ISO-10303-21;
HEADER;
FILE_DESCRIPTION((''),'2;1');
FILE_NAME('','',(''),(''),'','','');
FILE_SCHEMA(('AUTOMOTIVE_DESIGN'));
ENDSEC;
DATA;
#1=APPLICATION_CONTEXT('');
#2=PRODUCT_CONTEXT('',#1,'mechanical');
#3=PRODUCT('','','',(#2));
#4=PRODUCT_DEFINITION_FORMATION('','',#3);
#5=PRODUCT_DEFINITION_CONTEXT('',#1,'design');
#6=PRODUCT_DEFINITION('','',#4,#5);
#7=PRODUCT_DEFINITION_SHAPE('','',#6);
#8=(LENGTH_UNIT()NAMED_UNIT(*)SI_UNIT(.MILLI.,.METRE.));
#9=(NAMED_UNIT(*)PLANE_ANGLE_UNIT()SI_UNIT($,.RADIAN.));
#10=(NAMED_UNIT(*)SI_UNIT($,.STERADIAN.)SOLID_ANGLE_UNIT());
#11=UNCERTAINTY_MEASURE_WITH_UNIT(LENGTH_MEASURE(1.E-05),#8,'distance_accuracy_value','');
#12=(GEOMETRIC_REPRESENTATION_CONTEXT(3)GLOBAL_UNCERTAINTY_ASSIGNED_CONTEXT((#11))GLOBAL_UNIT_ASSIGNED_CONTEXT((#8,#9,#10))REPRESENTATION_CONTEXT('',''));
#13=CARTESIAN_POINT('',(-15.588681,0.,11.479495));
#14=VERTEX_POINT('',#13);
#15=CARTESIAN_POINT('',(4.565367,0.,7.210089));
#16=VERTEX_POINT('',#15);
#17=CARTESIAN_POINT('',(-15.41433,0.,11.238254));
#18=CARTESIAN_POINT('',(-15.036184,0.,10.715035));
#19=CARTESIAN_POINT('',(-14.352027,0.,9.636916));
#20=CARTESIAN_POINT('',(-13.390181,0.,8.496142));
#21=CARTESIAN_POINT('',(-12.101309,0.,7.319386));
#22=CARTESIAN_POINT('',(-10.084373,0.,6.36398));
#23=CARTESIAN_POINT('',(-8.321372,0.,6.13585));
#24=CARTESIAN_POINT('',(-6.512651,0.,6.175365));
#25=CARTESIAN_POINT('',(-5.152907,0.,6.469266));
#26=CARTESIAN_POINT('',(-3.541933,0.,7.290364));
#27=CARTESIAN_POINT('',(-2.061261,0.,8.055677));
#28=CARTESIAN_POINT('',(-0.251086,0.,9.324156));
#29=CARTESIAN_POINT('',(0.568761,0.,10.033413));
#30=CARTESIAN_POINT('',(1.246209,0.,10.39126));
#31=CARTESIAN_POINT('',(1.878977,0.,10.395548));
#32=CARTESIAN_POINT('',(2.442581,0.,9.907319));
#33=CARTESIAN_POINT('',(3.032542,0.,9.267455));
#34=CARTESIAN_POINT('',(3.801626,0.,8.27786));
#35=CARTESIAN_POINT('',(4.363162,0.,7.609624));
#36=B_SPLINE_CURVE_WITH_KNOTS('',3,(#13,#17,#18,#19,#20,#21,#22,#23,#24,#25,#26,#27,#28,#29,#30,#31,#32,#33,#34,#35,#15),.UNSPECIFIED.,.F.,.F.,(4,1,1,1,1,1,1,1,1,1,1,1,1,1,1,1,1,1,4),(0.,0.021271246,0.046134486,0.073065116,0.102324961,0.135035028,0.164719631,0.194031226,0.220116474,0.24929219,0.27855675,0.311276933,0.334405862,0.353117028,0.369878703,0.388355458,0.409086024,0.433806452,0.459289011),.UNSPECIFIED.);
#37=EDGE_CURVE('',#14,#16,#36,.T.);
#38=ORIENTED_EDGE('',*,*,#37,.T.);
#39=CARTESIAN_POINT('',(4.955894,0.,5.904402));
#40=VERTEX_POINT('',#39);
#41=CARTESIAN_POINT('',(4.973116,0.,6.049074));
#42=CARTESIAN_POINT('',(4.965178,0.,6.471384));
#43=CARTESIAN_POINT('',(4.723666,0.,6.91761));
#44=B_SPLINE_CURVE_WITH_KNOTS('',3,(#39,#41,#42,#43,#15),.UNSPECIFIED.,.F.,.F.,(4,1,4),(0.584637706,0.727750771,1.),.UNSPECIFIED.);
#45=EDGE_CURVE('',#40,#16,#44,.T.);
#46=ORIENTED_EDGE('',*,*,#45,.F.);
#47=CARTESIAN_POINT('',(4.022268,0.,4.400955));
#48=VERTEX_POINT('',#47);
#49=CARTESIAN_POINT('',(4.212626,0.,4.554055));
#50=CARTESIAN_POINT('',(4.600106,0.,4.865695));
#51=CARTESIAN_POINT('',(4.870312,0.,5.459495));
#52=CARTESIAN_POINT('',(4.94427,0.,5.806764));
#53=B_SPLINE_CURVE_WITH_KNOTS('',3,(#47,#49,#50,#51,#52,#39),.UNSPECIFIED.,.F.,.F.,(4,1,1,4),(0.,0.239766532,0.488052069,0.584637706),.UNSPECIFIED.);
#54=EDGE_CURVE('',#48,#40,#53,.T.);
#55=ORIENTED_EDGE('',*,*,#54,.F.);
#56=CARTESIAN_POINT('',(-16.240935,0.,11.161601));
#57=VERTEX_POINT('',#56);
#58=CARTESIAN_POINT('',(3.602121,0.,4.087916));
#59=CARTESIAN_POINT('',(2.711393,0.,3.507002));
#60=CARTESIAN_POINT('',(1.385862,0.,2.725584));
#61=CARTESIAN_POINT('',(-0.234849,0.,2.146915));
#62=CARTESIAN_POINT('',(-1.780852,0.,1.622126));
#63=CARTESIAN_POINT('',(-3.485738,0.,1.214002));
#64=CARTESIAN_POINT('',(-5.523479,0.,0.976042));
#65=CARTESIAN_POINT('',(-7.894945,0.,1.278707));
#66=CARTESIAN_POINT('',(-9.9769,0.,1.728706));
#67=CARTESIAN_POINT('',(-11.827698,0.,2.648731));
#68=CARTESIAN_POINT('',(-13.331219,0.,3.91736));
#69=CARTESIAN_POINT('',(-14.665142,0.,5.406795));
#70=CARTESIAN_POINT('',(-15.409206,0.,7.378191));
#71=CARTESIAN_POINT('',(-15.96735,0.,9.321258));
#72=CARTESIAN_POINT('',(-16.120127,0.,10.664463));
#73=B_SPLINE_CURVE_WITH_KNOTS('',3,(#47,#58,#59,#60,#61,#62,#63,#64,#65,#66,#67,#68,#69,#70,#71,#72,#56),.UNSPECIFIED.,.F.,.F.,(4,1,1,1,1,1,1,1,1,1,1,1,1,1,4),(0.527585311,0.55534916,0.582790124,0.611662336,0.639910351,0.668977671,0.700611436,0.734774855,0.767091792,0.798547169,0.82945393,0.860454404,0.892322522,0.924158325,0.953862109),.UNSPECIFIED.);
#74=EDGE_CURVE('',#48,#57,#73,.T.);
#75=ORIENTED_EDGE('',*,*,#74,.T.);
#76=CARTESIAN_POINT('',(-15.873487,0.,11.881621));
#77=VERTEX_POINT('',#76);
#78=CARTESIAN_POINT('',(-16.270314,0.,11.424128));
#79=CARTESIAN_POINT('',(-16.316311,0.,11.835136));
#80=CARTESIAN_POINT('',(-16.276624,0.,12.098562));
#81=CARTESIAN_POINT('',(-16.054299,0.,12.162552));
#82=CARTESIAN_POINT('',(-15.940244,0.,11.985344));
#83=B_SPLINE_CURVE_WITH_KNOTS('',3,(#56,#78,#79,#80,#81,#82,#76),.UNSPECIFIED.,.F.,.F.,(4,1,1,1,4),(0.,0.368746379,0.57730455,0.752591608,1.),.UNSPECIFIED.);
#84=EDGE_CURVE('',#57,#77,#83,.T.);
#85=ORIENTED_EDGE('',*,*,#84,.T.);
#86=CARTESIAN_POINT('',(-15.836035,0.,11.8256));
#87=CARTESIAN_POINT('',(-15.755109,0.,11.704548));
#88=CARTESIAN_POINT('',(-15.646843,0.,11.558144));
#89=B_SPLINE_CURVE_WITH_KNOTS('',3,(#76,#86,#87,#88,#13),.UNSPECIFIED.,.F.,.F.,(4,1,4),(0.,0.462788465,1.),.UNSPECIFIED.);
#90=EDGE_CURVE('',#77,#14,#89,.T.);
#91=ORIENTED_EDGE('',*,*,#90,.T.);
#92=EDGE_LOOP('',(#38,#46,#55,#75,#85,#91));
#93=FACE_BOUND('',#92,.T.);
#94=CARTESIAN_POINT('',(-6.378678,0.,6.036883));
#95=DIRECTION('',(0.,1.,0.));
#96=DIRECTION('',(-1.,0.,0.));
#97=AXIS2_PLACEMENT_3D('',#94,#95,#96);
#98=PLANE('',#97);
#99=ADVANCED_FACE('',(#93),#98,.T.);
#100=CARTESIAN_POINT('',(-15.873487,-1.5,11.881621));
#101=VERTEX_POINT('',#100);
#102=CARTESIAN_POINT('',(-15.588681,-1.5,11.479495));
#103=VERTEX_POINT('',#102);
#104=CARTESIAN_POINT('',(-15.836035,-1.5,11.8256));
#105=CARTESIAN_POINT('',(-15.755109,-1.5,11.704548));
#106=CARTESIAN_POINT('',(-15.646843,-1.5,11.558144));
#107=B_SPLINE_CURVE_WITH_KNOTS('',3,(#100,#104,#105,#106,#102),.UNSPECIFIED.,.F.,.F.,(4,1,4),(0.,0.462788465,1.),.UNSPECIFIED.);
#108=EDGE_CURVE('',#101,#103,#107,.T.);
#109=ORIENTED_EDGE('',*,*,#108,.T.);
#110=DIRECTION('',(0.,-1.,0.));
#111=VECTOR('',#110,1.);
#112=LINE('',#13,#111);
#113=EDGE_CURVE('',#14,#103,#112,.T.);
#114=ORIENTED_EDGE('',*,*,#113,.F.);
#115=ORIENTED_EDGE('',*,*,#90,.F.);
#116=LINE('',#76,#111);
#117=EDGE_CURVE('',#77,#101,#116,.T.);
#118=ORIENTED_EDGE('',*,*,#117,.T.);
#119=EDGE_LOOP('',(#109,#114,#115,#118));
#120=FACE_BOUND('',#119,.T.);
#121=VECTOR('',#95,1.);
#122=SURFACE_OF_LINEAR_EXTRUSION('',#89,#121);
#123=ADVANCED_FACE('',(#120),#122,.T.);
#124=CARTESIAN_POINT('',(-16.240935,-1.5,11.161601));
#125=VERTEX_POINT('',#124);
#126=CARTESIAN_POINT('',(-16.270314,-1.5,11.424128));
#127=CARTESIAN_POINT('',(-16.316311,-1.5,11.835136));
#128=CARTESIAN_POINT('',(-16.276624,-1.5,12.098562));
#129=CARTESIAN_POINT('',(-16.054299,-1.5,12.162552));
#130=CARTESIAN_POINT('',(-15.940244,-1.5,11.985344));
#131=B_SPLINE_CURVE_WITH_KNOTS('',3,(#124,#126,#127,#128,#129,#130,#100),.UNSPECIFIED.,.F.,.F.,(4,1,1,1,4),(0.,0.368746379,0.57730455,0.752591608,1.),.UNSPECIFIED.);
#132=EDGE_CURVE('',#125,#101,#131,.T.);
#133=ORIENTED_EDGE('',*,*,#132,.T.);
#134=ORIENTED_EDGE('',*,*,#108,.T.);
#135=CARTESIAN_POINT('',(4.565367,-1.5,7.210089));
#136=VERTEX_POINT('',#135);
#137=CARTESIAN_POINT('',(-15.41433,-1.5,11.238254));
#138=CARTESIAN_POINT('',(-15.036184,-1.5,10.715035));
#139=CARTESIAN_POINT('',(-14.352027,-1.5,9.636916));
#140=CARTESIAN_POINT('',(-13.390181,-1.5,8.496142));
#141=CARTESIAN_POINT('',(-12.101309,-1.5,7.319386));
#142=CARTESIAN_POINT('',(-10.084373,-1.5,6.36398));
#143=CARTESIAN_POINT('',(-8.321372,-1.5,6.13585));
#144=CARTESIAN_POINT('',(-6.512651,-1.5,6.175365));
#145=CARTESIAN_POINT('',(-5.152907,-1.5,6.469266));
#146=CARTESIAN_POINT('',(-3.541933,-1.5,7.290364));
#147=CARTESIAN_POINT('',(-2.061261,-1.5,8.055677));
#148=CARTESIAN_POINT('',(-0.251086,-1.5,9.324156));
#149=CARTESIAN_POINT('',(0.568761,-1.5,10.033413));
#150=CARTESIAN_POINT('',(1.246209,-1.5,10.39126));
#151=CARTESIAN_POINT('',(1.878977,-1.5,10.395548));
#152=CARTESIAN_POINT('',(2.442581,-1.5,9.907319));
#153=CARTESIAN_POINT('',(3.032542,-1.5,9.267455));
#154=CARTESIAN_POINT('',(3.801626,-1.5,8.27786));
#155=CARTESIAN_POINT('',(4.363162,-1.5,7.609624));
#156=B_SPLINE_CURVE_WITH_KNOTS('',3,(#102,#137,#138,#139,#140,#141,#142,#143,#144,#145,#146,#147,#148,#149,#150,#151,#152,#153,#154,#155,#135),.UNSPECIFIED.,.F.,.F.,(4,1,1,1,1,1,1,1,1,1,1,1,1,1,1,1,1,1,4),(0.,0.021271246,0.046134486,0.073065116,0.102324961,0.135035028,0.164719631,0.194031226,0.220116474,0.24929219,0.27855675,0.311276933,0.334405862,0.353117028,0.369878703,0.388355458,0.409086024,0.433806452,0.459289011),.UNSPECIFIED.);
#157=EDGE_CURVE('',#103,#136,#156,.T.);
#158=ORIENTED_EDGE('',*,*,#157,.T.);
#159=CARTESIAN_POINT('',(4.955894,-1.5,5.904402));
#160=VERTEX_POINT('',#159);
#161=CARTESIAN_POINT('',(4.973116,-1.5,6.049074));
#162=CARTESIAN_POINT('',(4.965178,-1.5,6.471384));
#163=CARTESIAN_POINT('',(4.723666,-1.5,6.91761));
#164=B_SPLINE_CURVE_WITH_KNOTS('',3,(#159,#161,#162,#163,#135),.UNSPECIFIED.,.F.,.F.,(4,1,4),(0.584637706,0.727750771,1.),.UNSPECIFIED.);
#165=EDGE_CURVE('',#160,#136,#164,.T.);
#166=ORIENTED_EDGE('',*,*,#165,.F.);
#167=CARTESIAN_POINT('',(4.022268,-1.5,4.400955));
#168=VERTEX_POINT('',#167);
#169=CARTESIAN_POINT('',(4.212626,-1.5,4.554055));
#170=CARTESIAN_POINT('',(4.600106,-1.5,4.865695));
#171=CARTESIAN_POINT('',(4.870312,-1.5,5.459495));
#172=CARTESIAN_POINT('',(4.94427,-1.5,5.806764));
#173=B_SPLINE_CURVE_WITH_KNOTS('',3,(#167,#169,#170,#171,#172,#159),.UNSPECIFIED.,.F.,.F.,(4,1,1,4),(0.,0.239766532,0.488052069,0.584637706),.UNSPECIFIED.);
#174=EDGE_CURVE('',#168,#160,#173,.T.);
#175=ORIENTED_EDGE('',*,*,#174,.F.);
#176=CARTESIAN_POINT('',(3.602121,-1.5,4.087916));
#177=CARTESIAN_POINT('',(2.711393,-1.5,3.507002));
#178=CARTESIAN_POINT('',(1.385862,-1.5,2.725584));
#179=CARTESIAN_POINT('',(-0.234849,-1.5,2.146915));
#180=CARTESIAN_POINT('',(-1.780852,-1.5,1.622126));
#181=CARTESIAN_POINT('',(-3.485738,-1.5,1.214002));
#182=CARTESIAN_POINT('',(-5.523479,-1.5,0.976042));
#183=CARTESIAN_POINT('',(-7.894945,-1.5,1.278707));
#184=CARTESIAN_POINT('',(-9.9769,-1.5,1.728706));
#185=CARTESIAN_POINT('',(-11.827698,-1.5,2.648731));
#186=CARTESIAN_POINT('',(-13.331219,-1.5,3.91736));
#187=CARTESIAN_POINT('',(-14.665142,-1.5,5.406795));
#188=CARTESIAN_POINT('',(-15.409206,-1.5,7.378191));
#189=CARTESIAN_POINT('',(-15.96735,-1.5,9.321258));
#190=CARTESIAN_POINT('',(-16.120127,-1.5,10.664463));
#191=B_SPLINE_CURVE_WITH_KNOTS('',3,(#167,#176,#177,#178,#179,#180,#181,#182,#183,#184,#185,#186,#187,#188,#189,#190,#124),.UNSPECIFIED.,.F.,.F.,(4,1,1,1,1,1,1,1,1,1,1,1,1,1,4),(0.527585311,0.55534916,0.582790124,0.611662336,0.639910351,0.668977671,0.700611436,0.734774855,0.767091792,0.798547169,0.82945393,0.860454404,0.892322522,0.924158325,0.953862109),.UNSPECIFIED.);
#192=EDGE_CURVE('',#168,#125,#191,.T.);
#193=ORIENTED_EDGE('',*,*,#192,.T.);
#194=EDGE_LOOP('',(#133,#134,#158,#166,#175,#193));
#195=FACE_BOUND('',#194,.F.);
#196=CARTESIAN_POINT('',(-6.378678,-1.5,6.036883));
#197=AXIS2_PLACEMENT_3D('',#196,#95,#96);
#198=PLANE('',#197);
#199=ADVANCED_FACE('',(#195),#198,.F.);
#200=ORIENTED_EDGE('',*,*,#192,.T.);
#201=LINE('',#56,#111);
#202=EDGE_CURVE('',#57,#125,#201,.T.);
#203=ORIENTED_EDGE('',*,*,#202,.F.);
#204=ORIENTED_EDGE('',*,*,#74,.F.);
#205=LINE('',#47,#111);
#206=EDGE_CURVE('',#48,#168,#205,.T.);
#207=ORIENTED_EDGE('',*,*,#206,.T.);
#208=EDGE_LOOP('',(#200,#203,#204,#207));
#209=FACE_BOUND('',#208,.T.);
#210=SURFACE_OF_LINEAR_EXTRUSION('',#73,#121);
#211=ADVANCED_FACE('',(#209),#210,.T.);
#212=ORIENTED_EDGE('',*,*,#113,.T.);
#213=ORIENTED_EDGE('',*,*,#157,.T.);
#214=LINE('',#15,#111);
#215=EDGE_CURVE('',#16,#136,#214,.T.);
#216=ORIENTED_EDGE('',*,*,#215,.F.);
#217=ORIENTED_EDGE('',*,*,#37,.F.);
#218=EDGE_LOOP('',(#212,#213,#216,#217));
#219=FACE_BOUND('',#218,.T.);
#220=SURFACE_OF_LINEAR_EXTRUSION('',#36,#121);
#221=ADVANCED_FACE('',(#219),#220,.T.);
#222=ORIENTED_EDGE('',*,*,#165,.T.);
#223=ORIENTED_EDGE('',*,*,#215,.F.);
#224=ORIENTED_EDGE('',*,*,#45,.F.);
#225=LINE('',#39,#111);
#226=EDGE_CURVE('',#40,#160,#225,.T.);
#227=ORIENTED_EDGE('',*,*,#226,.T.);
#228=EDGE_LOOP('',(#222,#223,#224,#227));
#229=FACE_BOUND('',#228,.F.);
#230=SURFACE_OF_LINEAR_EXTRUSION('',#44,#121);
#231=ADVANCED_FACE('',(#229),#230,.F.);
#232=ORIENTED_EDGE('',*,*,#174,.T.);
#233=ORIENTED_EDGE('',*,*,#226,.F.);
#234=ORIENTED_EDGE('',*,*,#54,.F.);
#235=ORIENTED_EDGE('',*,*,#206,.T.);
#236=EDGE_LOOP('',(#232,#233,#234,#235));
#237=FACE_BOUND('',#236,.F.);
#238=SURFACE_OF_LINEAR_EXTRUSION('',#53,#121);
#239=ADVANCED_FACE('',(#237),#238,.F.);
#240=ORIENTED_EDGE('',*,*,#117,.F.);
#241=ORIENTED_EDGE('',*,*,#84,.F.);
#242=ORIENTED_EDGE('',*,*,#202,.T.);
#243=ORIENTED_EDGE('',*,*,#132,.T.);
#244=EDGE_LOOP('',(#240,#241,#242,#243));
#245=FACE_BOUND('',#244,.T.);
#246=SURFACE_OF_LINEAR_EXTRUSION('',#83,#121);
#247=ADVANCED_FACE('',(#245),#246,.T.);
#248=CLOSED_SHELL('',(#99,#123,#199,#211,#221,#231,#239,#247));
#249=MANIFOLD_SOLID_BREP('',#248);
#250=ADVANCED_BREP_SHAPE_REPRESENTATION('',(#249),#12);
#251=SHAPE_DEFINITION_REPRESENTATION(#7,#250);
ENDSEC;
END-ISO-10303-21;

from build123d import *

# Parameters (mm, degrees)
F1_DEPTH = 1.5


with BuildPart() as f1:
    # F0 (on Front) → F1 (new body)
    with BuildSketch(Plane.XZ):
        with BuildLine():
            add(Edge.make_bspline(
                [(-15.5886812717, 11.4794949823), (-15.4143296847, 11.2382539811), (-15.0361844262, 10.7150345355), (-14.3520272629, 9.6369158456), (-13.3901809462, 8.4961422482), (-12.1013087962, 7.3193862365), (-10.0843733619, 6.363980171), (-8.321372324, 6.1358495153), (-6.5126508034, 6.1753650592), (-5.1529070228, 6.4692660827), (-3.5419333867, 7.2903643377), (-2.0612605045, 8.0556770571), (-0.2510856551, 9.3241557763), (0.5687606343, 10.0334130257), (1.2462094689, 10.3912597961), (1.8789769228, 10.3955484825), (2.442581301, 9.9073187544), (3.0325423811, 9.2674548808), (3.8016255024, 8.2778595229), (4.3631617457, 7.6096235524), (4.5653669513, 7.2100887828)],
                knots=[0, 0, 0, 0, 0.0212712459, 0.0461344856, 0.0730651165, 0.1023249612, 0.1350350284, 0.1647196312, 0.1940312263, 0.2201164738, 0.2492921901, 0.2785567502, 0.3112769334, 0.3344058624, 0.3531170279, 0.369878703, 0.3883554579, 0.4090860244, 0.4338064524, 0.4592890108, 0.4592890108, 0.4592890108, 0.4592890108], degree=3))
            add(Edge.make_bspline(
                [(-15.8734871656, 11.8816214435), (-15.8360353147, 11.825599868), (-15.7551088144, 11.7045476383), (-15.6468429454, 11.5581444589), (-15.5886812717, 11.4794949823)],
                knots=[0, 0, 0, 0, 0.4627884651, 1, 1, 1, 1], degree=3))
            add(Edge.make_bspline(
                [(-16.2409348995, 11.1616010599), (-16.2703143769, 11.4241276451), (-16.3163105059, 11.8351358634), (-16.2766238455, 12.0985623317), (-16.0542989155, 12.1625521871), (-15.9402444972, 11.985343612), (-15.8734871656, 11.8816214435)],
                knots=[0, 0, 0, 0, 0.3687463789, 0.5773045503, 0.7525916077, 1, 1, 1, 1], degree=3))
            add(Edge.make_bspline(
                [(4.0222675889, 4.4009554021), (3.6021214232, 4.0879163566), (2.711392987, 3.5070019245), (1.3858615233, 2.7255840104), (-0.2348494988, 2.1469154815), (-1.7808518748, 1.6221260795), (-3.4857384395, 1.214002475), (-5.5234793136, 0.976041948), (-7.8949454527, 1.2787065655), (-9.9769000961, 1.728705851), (-11.8276981969, 2.6487308245), (-13.3312194271, 3.9173596525), (-14.6651416452, 5.4067950099), (-15.4092058722, 7.3781913671), (-15.9673503273, 9.3212581102), (-16.1201270994, 10.6644633604), (-16.2409348995, 11.1616010599)],
                knots=[0.5275853115, 0.5275853115, 0.5275853115, 0.5275853115, 0.5553491604, 0.5827901242, 0.6116623363, 0.6399103515, 0.6689776706, 0.7006114359, 0.7347748549, 0.7670917923, 0.7985471692, 0.8294539301, 0.8604544038, 0.8923225225, 0.9241583255, 0.9538621091, 0.9538621091, 0.9538621091, 0.9538621091], degree=3))
            add(Edge.make_bspline(
                [(4.0222675889, 4.4009554021), (4.2126258121, 4.5540553088), (4.6001057654, 4.8656948253), (4.8703118565, 5.4594945664), (4.9442704879, 5.8067642972), (4.9558935946, 5.904401992)],
                knots=[0, 0, 0, 0, 0.2397665322, 0.488052069, 0.5846377064, 0.5846377064, 0.5846377064, 0.5846377064], degree=3))
            add(Edge.make_bspline(
                [(4.5653669513, 7.2100887828), (4.7618312787, 6.8218973434), (4.8919183573, 6.3322829413), (4.9512804987, 5.9393771693), (4.9558935946, 5.904401992)],
                knots=[0.4592890108, 0.4592890108, 0.4592890108, 0.4592890108, 0.4840480851, 0.4865206827, 0.4865206827, 0.4865206827, 0.4865206827], degree=3))
        make_face()
        with BuildLine():
            add(Edge.make_bspline(
                [(4.9558935946, 5.904401992), (4.9731158076, 6.0490739131), (4.9651784758, 6.4713839037), (4.7236661883, 6.9176099233), (4.5653669513, 7.2100887828)],
                knots=[0.5846377064, 0.5846377064, 0.5846377064, 0.5846377064, 0.7277507707, 1, 1, 1, 1], degree=3))
            add(Edge.make_bspline(
                [(4.5653669513, 7.2100887828), (4.7618312787, 6.8218973434), (4.8919183573, 6.3322829413), (4.9512804987, 5.9393771693), (4.9558935946, 5.904401992)],
                knots=[0.4592890108, 0.4592890108, 0.4592890108, 0.4592890108, 0.4840480851, 0.4865206827, 0.4865206827, 0.4865206827, 0.4865206827], degree=3))
        make_face()
    extrude(amount=F1_DEPTH)


solid = f1.part
